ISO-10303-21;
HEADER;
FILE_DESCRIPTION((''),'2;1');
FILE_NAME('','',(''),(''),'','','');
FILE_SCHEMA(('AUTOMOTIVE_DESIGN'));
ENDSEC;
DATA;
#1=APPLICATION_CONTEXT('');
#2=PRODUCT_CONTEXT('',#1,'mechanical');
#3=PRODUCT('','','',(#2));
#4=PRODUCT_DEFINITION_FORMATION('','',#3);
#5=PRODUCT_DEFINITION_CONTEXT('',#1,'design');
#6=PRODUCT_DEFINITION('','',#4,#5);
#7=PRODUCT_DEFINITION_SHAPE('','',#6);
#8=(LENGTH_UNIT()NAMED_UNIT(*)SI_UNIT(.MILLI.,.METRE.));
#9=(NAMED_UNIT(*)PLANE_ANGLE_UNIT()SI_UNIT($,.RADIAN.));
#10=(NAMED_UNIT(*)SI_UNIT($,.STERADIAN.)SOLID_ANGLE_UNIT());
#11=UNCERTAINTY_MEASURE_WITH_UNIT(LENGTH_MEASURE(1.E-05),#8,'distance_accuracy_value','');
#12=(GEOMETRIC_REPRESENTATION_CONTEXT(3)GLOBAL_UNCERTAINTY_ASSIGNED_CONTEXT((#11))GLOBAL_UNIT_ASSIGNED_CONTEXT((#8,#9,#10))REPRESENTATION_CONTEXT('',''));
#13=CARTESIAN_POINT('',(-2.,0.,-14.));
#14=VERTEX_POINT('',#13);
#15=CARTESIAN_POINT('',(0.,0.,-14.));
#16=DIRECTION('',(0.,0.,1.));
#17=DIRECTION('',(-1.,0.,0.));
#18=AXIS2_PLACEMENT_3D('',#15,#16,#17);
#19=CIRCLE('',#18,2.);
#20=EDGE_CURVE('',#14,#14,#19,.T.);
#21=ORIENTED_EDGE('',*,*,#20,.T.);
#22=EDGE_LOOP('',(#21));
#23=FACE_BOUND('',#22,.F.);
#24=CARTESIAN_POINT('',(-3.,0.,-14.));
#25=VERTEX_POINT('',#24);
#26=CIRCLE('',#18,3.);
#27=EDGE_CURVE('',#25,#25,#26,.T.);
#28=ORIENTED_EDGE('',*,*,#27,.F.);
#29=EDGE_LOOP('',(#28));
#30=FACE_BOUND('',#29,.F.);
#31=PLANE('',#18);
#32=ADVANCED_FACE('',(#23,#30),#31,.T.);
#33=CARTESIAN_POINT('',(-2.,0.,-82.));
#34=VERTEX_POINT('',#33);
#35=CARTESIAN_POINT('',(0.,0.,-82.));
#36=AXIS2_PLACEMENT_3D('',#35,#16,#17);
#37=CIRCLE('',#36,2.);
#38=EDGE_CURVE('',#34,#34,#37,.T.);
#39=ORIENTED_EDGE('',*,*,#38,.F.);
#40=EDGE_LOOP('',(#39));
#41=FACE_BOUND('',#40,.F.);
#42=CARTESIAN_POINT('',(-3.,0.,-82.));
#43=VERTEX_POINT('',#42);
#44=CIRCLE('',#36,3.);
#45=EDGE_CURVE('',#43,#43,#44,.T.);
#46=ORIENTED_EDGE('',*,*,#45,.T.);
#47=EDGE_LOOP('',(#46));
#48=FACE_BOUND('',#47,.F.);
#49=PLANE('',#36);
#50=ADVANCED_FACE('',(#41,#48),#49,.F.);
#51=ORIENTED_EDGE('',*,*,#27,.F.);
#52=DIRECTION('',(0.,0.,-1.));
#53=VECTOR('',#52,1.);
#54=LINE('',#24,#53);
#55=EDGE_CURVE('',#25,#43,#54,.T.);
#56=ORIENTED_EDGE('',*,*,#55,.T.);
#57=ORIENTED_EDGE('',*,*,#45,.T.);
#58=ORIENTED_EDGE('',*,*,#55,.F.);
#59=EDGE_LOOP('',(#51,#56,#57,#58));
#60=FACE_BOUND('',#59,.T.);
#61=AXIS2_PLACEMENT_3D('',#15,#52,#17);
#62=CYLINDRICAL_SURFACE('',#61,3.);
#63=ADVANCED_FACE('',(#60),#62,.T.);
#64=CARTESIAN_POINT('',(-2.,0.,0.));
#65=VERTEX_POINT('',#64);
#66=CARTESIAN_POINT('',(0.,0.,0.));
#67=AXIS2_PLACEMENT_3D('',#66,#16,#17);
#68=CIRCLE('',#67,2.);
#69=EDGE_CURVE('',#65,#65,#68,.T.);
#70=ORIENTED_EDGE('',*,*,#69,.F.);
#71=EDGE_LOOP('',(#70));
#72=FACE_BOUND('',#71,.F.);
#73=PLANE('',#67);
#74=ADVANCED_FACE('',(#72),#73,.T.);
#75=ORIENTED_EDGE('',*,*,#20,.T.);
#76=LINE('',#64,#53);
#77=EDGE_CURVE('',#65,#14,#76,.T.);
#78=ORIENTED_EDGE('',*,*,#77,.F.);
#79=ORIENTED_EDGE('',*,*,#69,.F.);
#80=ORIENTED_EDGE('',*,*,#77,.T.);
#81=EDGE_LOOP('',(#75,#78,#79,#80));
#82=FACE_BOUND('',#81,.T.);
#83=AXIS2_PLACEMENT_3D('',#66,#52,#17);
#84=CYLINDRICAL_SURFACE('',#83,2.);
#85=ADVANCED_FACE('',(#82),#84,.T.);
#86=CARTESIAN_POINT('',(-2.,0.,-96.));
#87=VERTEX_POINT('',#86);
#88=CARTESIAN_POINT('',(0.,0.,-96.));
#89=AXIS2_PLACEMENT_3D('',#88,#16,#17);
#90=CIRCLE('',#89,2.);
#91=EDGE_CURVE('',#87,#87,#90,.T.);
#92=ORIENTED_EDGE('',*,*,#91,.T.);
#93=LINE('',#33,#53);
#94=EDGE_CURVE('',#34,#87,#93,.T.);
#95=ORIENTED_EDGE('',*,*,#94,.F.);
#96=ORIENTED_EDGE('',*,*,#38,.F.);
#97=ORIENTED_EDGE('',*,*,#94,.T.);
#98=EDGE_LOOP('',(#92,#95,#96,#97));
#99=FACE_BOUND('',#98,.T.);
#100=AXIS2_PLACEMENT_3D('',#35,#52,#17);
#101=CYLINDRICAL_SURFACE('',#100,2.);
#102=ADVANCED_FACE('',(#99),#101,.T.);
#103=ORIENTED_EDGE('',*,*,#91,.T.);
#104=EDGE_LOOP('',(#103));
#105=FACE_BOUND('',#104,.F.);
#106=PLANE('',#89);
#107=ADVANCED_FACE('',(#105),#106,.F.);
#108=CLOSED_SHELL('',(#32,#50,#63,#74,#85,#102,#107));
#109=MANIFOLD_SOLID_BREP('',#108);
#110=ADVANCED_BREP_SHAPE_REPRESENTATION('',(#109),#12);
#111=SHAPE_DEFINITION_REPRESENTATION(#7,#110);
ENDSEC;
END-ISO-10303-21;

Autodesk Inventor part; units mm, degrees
ref_plane "YZ Plane" through (0, 0, 0) normal (1, 0, 0) x (0, 1, 0)
ref_plane "XZ Plane" through (0, 0, 0) normal (0, 1, 0) x (-1, 0, 0)
ref_plane "XY Plane" through (0, 0, 0) normal (0, 0, 1) x (1, 0, 0)
sketch "Skizze1" plane through (0, 0, 0) normal (0, 1, 0) x (-1, 0, 0)
  line L0 (0, 0) -> (2, 0)
  line L1 (2, 0) -> (2, -14)
  line L2 (2, -14) -> (3, -14)
  line L3 (3, -14) -> (3, -82)
  line L4 (3, -82) -> (2, -82)
  line L5 (2, -82) -> (2, -96)
  line L6 (2, -96) -> (0, -96)
  line L7 (0, -96) -> (0, 0)
  point P0 (1, -96)
  dimension "d0" = 96
  dimension "d1" = 68
  dimension "d2" = 14
  dimension "d3" = 4
  dimension "d4" = 6
revolve "Umdrehung1" add sketch "Skizze1" angle 360 about axis through (0, 0, -96) along (0, 0, 1)
thread "Gewinde1" size "M4x0.7" class "6g" standard "ISO Metric profile" length 11
thread "Gewinde2" size "M4x0.7" class "6g" standard "ISO Metric profile" length 11
properties part number "1018"
